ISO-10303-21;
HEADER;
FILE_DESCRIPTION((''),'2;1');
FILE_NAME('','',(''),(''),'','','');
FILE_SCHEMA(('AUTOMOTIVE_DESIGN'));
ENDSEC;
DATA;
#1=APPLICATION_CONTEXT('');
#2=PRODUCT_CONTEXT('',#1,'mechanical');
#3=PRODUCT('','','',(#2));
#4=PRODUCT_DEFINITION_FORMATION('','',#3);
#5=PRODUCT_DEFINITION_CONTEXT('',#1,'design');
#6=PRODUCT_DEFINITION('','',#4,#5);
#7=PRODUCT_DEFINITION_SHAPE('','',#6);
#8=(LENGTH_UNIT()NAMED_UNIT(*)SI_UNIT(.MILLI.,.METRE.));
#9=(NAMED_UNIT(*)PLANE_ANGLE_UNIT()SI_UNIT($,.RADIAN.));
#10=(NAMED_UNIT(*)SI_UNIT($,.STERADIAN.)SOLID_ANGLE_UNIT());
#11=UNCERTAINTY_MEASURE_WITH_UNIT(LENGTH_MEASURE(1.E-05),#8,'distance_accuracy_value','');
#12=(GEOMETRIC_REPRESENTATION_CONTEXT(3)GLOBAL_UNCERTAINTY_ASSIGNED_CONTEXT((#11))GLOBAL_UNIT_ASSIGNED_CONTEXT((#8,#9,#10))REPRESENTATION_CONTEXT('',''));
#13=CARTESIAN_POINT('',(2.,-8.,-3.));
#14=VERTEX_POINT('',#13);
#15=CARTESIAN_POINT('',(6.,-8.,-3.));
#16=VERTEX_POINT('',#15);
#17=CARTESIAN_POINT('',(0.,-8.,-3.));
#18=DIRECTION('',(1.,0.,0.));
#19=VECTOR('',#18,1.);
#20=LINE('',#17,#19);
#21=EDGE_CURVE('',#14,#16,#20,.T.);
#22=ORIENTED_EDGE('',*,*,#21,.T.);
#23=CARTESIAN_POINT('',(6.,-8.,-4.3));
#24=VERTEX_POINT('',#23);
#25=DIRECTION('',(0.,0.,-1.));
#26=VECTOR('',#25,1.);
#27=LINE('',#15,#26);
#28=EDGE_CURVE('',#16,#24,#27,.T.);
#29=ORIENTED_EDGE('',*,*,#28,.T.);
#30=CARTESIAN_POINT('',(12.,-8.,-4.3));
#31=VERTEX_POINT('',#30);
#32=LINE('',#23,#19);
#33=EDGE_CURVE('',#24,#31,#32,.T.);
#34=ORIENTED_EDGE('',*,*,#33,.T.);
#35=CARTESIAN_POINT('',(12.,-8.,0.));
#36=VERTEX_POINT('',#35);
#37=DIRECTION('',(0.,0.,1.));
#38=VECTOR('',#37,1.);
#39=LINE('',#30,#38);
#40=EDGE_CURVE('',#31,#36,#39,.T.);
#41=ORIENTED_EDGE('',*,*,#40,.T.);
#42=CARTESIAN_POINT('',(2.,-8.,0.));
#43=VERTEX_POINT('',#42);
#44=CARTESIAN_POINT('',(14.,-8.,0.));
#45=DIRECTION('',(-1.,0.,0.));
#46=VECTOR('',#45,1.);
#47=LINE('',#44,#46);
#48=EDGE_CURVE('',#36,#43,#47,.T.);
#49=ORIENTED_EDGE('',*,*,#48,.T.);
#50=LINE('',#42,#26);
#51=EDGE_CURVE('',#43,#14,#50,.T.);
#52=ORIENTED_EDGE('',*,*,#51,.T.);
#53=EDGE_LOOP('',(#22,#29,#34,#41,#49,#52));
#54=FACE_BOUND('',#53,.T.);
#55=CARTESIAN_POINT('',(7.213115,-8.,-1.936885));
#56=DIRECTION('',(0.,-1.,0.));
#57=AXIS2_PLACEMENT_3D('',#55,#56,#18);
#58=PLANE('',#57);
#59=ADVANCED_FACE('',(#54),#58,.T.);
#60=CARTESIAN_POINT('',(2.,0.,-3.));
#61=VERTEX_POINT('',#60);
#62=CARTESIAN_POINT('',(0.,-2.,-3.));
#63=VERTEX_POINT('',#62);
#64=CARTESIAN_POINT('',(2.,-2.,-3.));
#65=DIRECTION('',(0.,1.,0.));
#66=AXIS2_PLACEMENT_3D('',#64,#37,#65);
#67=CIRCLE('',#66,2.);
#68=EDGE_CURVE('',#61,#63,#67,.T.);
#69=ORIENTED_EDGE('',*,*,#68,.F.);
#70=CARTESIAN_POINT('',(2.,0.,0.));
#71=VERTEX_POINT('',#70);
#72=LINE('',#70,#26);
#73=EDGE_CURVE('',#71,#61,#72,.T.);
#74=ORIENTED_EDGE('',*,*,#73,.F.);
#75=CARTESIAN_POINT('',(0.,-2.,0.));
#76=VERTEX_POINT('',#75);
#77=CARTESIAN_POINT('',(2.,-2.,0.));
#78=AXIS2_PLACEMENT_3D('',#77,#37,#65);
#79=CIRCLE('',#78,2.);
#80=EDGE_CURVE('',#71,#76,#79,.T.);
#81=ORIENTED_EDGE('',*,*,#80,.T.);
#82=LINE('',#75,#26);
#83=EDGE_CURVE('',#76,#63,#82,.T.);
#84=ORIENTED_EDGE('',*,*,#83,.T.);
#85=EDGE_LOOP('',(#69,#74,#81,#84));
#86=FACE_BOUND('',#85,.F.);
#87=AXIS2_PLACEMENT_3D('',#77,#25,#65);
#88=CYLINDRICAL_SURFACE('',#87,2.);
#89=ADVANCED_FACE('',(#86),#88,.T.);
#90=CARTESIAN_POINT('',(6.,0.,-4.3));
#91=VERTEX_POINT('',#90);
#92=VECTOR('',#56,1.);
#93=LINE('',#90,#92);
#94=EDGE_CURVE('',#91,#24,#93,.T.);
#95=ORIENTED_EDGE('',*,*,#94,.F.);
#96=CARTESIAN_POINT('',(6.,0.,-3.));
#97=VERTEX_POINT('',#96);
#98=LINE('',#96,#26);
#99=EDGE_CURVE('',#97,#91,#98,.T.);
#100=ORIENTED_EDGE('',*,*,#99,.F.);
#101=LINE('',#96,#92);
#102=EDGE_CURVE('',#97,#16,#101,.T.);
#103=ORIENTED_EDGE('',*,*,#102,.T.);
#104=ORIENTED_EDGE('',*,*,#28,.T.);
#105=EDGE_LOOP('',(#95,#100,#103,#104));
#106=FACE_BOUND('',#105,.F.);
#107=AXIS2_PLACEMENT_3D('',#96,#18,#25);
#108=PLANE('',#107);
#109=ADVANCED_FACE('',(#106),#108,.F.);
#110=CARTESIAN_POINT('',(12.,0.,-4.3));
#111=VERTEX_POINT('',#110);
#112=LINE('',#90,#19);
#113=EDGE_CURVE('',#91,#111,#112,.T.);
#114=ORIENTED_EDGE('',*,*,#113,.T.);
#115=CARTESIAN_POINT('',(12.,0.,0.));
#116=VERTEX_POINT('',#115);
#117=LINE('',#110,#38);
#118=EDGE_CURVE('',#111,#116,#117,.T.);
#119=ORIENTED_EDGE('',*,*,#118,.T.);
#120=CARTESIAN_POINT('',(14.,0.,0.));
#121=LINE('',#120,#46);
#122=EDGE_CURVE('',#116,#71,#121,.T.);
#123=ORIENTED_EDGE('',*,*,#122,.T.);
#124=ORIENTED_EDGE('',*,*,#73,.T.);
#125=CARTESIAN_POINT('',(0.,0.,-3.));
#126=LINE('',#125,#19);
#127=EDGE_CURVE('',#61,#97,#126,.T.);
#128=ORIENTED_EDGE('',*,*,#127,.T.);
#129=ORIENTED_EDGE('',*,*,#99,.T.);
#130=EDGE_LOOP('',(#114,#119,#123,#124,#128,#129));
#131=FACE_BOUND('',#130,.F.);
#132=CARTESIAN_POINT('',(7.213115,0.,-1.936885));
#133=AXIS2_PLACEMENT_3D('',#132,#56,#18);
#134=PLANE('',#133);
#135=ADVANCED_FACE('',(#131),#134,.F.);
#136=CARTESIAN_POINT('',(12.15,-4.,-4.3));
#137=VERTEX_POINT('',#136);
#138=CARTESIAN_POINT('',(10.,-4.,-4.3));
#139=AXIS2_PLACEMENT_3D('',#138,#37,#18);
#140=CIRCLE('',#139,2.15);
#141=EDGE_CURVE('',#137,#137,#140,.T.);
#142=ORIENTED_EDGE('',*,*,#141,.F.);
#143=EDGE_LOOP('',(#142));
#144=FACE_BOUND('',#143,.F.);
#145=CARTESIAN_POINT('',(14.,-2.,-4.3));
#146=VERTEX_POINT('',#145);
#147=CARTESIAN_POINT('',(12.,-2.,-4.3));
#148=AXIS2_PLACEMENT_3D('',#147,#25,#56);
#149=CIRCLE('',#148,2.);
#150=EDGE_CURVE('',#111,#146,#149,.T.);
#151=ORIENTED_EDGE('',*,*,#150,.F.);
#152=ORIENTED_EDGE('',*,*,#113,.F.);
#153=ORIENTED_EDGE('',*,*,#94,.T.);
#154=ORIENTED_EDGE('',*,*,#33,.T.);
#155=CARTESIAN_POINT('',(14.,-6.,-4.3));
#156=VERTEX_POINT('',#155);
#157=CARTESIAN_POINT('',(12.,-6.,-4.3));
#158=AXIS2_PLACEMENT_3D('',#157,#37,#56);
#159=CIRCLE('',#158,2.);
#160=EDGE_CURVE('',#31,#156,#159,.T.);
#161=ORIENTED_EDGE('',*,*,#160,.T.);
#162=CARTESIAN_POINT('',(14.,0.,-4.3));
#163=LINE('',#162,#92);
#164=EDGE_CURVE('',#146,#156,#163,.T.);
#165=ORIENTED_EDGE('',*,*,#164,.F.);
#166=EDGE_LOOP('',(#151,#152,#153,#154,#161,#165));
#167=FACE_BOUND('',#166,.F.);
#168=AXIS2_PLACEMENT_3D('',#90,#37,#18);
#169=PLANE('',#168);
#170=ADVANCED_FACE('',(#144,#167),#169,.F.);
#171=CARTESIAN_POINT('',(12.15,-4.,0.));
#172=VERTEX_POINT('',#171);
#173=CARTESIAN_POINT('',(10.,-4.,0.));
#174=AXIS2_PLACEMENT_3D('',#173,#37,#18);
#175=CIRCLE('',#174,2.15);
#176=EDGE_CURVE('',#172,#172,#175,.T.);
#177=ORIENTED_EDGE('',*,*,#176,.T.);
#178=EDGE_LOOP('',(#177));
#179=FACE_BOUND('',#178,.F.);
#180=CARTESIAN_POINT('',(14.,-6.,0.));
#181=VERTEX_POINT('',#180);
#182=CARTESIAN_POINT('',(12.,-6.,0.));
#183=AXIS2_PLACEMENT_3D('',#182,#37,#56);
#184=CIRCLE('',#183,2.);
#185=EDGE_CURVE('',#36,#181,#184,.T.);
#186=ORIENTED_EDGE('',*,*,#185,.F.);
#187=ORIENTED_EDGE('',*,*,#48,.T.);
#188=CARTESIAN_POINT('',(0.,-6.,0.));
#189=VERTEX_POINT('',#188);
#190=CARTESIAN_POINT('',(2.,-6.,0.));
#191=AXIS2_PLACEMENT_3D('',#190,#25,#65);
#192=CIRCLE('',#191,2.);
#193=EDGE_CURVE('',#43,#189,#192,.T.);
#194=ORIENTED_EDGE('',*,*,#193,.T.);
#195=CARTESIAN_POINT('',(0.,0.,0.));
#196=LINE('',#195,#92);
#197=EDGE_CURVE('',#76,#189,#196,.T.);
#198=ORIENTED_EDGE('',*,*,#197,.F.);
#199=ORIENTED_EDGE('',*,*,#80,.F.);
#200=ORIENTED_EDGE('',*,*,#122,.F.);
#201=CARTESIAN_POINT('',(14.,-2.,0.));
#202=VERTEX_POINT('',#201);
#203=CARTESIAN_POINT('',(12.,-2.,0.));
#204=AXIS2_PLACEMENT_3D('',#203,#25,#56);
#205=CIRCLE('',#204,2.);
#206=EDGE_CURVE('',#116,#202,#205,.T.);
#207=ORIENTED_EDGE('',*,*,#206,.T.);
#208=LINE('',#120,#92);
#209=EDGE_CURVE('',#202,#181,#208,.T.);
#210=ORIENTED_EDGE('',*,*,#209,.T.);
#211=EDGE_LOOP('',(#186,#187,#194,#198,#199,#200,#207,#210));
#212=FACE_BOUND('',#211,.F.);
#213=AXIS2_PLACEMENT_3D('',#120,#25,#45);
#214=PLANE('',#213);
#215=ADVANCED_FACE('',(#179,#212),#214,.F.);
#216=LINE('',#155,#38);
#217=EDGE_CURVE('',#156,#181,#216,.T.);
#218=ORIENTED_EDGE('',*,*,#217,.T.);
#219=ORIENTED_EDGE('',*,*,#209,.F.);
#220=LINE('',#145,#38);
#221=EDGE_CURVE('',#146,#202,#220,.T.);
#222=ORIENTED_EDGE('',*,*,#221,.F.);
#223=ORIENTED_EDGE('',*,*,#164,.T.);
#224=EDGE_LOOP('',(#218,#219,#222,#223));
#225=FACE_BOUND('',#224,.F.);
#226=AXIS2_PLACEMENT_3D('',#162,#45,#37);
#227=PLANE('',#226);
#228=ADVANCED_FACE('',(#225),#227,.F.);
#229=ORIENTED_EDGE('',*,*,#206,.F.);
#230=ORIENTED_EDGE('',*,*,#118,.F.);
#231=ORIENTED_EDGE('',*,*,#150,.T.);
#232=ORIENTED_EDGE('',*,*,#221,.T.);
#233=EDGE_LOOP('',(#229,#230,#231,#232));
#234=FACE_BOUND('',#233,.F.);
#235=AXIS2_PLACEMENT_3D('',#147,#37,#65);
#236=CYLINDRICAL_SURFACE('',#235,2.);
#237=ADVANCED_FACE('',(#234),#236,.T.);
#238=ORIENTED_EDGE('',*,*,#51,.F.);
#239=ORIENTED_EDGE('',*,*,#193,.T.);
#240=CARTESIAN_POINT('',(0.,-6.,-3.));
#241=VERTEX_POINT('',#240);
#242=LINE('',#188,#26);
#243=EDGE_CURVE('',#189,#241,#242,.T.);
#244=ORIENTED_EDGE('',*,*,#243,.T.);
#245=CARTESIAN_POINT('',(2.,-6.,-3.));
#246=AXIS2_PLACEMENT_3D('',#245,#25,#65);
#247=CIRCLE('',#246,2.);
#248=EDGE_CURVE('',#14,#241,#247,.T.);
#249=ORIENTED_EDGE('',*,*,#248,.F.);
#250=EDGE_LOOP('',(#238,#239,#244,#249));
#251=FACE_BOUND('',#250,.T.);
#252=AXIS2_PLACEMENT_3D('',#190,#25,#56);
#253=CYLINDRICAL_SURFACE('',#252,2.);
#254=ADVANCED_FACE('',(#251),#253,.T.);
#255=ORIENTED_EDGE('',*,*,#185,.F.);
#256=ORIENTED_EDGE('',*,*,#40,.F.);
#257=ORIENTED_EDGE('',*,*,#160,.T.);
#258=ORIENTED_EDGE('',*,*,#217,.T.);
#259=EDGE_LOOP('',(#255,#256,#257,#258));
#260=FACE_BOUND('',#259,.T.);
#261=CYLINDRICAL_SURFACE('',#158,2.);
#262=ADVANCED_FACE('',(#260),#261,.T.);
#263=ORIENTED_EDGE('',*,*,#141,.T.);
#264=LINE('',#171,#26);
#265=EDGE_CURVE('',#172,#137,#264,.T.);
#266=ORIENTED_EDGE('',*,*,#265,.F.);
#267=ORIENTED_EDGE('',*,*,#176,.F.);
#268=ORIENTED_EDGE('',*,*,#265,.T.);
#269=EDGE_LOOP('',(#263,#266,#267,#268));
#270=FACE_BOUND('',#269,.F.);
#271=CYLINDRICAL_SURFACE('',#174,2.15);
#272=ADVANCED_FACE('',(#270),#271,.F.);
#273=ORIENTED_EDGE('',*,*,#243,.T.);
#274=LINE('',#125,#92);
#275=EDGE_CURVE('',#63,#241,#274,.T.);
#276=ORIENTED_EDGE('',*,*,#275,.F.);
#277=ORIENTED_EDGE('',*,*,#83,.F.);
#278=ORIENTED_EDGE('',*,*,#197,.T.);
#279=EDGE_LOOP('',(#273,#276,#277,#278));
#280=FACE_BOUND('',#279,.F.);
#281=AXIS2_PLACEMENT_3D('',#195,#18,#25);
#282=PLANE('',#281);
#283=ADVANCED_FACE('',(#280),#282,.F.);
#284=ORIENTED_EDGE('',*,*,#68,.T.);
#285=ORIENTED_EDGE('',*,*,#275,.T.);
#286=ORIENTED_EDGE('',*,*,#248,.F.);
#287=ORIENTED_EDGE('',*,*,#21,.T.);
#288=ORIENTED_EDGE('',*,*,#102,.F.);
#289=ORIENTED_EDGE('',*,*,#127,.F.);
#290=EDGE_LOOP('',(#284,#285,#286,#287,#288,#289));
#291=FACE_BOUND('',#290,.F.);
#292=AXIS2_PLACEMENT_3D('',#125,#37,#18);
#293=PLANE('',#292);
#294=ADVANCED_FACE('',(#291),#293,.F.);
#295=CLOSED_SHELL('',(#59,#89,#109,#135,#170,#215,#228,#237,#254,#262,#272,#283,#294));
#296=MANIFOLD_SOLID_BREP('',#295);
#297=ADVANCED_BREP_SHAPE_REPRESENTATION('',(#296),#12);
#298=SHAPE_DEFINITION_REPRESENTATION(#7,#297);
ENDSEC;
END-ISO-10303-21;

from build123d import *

# Parameters (mm, degrees)
F2_DEPTH = 8
F3_R     = 2.15
F4_DEPTH = 4.3
F5_R     = 2


# Not quite as in the source:
# - a feature names something its author has since deleted; it is built from what else it names


with BuildPart() as f2:
    # F1 (on Front) → F2 (new body)
    with BuildSketch(Plane.XZ):
        Polygon((6, -3), (6, -4.3), (14, -4.3), (14, 0), (0, 0), (0, -3), align=None)
    extrude(amount=F2_DEPTH)

    # F3 (on face) → F4 (cut, through all)
    with BuildSketch(Plane.XY):
        with Locations((10, -4)):
            Circle(F3_R)
    extrude(amount=-F4_DEPTH, mode=Mode.SUBTRACT)

    # F5
    f5_edges = [f2.edges().sort_by_distance(p)[0] for p in [
        (14, -8, -2.15),
        (14, 0, -2.15),
        (0, -8, -1.5),
        (0, 0, -1.5),
    ]]
    fillet(f5_edges, radius=F5_R)


solid = f2.part
